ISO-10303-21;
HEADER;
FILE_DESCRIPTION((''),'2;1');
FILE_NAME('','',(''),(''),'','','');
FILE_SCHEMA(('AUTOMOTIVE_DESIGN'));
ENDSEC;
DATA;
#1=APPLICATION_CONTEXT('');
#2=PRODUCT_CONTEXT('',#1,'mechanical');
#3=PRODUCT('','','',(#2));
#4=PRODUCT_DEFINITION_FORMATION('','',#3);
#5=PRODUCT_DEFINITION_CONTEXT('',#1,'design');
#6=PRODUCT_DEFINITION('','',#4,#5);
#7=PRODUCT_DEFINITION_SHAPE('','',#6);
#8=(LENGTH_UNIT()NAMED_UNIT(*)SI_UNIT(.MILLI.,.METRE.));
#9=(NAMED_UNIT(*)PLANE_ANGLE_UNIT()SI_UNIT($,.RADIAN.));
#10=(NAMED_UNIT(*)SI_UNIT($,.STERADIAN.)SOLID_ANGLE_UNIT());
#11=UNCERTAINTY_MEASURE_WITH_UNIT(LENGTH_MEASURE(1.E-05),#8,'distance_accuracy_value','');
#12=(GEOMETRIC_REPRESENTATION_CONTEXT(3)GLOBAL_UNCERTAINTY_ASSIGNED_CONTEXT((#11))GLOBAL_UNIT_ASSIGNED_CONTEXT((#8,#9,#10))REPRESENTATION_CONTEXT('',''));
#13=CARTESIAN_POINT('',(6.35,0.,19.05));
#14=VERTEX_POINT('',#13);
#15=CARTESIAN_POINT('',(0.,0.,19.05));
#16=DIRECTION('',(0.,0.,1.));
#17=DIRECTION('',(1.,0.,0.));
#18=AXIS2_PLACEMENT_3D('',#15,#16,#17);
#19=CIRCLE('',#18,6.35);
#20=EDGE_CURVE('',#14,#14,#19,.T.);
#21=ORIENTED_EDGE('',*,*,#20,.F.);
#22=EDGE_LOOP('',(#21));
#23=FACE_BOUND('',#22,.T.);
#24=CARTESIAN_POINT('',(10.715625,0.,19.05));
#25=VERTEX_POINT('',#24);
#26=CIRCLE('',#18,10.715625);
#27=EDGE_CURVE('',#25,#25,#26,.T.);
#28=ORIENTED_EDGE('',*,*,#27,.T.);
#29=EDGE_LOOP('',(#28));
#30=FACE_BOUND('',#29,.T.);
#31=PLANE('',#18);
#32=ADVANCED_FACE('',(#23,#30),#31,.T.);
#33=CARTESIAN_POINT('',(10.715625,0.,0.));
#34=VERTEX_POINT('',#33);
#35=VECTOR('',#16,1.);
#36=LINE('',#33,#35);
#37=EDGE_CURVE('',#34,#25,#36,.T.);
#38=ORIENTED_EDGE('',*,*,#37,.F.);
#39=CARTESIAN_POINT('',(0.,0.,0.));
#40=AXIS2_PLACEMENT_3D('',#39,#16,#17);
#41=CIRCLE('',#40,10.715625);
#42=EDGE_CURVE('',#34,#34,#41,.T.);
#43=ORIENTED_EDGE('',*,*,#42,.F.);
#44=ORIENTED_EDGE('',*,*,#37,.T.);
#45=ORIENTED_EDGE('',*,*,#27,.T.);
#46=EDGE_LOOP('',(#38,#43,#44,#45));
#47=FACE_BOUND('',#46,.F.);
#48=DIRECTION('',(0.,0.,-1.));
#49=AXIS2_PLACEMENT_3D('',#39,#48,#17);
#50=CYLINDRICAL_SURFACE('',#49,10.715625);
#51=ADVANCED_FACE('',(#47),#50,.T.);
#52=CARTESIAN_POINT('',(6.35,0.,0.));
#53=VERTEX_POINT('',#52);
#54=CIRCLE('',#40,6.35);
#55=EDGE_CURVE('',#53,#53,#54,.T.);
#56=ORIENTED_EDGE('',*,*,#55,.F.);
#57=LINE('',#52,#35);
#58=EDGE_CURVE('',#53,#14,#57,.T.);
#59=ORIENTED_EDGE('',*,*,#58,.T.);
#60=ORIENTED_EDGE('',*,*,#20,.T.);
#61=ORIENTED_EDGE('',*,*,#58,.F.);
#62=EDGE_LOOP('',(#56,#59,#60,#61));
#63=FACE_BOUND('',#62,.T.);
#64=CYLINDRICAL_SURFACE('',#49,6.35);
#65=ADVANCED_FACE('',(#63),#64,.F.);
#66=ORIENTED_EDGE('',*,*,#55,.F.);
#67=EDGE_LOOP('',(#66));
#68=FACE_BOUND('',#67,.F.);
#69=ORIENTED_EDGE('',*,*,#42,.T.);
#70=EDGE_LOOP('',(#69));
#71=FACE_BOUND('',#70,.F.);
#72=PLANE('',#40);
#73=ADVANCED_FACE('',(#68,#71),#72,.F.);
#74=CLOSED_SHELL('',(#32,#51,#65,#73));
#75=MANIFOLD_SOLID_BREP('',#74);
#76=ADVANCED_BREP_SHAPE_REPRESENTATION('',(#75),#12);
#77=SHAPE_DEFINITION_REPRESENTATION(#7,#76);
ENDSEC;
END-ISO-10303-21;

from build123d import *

# Parameters (mm, degrees)
F1_R     = 10.715625
F1_R_2   = 6.35
F2_DEPTH = 19.05


# Not quite as in the source:
# - a variable given as a bare number and used for a length is read in inches; the dataset says mm whatever the document's units were


with BuildPart() as f2:
    # F1 (on Top) → F2 (new body)
    with BuildSketch(Plane.XY):
        Circle(F1_R)
        Circle(F1_R_2, mode=Mode.SUBTRACT)
    extrude(amount=F2_DEPTH)


solid = f2.part
